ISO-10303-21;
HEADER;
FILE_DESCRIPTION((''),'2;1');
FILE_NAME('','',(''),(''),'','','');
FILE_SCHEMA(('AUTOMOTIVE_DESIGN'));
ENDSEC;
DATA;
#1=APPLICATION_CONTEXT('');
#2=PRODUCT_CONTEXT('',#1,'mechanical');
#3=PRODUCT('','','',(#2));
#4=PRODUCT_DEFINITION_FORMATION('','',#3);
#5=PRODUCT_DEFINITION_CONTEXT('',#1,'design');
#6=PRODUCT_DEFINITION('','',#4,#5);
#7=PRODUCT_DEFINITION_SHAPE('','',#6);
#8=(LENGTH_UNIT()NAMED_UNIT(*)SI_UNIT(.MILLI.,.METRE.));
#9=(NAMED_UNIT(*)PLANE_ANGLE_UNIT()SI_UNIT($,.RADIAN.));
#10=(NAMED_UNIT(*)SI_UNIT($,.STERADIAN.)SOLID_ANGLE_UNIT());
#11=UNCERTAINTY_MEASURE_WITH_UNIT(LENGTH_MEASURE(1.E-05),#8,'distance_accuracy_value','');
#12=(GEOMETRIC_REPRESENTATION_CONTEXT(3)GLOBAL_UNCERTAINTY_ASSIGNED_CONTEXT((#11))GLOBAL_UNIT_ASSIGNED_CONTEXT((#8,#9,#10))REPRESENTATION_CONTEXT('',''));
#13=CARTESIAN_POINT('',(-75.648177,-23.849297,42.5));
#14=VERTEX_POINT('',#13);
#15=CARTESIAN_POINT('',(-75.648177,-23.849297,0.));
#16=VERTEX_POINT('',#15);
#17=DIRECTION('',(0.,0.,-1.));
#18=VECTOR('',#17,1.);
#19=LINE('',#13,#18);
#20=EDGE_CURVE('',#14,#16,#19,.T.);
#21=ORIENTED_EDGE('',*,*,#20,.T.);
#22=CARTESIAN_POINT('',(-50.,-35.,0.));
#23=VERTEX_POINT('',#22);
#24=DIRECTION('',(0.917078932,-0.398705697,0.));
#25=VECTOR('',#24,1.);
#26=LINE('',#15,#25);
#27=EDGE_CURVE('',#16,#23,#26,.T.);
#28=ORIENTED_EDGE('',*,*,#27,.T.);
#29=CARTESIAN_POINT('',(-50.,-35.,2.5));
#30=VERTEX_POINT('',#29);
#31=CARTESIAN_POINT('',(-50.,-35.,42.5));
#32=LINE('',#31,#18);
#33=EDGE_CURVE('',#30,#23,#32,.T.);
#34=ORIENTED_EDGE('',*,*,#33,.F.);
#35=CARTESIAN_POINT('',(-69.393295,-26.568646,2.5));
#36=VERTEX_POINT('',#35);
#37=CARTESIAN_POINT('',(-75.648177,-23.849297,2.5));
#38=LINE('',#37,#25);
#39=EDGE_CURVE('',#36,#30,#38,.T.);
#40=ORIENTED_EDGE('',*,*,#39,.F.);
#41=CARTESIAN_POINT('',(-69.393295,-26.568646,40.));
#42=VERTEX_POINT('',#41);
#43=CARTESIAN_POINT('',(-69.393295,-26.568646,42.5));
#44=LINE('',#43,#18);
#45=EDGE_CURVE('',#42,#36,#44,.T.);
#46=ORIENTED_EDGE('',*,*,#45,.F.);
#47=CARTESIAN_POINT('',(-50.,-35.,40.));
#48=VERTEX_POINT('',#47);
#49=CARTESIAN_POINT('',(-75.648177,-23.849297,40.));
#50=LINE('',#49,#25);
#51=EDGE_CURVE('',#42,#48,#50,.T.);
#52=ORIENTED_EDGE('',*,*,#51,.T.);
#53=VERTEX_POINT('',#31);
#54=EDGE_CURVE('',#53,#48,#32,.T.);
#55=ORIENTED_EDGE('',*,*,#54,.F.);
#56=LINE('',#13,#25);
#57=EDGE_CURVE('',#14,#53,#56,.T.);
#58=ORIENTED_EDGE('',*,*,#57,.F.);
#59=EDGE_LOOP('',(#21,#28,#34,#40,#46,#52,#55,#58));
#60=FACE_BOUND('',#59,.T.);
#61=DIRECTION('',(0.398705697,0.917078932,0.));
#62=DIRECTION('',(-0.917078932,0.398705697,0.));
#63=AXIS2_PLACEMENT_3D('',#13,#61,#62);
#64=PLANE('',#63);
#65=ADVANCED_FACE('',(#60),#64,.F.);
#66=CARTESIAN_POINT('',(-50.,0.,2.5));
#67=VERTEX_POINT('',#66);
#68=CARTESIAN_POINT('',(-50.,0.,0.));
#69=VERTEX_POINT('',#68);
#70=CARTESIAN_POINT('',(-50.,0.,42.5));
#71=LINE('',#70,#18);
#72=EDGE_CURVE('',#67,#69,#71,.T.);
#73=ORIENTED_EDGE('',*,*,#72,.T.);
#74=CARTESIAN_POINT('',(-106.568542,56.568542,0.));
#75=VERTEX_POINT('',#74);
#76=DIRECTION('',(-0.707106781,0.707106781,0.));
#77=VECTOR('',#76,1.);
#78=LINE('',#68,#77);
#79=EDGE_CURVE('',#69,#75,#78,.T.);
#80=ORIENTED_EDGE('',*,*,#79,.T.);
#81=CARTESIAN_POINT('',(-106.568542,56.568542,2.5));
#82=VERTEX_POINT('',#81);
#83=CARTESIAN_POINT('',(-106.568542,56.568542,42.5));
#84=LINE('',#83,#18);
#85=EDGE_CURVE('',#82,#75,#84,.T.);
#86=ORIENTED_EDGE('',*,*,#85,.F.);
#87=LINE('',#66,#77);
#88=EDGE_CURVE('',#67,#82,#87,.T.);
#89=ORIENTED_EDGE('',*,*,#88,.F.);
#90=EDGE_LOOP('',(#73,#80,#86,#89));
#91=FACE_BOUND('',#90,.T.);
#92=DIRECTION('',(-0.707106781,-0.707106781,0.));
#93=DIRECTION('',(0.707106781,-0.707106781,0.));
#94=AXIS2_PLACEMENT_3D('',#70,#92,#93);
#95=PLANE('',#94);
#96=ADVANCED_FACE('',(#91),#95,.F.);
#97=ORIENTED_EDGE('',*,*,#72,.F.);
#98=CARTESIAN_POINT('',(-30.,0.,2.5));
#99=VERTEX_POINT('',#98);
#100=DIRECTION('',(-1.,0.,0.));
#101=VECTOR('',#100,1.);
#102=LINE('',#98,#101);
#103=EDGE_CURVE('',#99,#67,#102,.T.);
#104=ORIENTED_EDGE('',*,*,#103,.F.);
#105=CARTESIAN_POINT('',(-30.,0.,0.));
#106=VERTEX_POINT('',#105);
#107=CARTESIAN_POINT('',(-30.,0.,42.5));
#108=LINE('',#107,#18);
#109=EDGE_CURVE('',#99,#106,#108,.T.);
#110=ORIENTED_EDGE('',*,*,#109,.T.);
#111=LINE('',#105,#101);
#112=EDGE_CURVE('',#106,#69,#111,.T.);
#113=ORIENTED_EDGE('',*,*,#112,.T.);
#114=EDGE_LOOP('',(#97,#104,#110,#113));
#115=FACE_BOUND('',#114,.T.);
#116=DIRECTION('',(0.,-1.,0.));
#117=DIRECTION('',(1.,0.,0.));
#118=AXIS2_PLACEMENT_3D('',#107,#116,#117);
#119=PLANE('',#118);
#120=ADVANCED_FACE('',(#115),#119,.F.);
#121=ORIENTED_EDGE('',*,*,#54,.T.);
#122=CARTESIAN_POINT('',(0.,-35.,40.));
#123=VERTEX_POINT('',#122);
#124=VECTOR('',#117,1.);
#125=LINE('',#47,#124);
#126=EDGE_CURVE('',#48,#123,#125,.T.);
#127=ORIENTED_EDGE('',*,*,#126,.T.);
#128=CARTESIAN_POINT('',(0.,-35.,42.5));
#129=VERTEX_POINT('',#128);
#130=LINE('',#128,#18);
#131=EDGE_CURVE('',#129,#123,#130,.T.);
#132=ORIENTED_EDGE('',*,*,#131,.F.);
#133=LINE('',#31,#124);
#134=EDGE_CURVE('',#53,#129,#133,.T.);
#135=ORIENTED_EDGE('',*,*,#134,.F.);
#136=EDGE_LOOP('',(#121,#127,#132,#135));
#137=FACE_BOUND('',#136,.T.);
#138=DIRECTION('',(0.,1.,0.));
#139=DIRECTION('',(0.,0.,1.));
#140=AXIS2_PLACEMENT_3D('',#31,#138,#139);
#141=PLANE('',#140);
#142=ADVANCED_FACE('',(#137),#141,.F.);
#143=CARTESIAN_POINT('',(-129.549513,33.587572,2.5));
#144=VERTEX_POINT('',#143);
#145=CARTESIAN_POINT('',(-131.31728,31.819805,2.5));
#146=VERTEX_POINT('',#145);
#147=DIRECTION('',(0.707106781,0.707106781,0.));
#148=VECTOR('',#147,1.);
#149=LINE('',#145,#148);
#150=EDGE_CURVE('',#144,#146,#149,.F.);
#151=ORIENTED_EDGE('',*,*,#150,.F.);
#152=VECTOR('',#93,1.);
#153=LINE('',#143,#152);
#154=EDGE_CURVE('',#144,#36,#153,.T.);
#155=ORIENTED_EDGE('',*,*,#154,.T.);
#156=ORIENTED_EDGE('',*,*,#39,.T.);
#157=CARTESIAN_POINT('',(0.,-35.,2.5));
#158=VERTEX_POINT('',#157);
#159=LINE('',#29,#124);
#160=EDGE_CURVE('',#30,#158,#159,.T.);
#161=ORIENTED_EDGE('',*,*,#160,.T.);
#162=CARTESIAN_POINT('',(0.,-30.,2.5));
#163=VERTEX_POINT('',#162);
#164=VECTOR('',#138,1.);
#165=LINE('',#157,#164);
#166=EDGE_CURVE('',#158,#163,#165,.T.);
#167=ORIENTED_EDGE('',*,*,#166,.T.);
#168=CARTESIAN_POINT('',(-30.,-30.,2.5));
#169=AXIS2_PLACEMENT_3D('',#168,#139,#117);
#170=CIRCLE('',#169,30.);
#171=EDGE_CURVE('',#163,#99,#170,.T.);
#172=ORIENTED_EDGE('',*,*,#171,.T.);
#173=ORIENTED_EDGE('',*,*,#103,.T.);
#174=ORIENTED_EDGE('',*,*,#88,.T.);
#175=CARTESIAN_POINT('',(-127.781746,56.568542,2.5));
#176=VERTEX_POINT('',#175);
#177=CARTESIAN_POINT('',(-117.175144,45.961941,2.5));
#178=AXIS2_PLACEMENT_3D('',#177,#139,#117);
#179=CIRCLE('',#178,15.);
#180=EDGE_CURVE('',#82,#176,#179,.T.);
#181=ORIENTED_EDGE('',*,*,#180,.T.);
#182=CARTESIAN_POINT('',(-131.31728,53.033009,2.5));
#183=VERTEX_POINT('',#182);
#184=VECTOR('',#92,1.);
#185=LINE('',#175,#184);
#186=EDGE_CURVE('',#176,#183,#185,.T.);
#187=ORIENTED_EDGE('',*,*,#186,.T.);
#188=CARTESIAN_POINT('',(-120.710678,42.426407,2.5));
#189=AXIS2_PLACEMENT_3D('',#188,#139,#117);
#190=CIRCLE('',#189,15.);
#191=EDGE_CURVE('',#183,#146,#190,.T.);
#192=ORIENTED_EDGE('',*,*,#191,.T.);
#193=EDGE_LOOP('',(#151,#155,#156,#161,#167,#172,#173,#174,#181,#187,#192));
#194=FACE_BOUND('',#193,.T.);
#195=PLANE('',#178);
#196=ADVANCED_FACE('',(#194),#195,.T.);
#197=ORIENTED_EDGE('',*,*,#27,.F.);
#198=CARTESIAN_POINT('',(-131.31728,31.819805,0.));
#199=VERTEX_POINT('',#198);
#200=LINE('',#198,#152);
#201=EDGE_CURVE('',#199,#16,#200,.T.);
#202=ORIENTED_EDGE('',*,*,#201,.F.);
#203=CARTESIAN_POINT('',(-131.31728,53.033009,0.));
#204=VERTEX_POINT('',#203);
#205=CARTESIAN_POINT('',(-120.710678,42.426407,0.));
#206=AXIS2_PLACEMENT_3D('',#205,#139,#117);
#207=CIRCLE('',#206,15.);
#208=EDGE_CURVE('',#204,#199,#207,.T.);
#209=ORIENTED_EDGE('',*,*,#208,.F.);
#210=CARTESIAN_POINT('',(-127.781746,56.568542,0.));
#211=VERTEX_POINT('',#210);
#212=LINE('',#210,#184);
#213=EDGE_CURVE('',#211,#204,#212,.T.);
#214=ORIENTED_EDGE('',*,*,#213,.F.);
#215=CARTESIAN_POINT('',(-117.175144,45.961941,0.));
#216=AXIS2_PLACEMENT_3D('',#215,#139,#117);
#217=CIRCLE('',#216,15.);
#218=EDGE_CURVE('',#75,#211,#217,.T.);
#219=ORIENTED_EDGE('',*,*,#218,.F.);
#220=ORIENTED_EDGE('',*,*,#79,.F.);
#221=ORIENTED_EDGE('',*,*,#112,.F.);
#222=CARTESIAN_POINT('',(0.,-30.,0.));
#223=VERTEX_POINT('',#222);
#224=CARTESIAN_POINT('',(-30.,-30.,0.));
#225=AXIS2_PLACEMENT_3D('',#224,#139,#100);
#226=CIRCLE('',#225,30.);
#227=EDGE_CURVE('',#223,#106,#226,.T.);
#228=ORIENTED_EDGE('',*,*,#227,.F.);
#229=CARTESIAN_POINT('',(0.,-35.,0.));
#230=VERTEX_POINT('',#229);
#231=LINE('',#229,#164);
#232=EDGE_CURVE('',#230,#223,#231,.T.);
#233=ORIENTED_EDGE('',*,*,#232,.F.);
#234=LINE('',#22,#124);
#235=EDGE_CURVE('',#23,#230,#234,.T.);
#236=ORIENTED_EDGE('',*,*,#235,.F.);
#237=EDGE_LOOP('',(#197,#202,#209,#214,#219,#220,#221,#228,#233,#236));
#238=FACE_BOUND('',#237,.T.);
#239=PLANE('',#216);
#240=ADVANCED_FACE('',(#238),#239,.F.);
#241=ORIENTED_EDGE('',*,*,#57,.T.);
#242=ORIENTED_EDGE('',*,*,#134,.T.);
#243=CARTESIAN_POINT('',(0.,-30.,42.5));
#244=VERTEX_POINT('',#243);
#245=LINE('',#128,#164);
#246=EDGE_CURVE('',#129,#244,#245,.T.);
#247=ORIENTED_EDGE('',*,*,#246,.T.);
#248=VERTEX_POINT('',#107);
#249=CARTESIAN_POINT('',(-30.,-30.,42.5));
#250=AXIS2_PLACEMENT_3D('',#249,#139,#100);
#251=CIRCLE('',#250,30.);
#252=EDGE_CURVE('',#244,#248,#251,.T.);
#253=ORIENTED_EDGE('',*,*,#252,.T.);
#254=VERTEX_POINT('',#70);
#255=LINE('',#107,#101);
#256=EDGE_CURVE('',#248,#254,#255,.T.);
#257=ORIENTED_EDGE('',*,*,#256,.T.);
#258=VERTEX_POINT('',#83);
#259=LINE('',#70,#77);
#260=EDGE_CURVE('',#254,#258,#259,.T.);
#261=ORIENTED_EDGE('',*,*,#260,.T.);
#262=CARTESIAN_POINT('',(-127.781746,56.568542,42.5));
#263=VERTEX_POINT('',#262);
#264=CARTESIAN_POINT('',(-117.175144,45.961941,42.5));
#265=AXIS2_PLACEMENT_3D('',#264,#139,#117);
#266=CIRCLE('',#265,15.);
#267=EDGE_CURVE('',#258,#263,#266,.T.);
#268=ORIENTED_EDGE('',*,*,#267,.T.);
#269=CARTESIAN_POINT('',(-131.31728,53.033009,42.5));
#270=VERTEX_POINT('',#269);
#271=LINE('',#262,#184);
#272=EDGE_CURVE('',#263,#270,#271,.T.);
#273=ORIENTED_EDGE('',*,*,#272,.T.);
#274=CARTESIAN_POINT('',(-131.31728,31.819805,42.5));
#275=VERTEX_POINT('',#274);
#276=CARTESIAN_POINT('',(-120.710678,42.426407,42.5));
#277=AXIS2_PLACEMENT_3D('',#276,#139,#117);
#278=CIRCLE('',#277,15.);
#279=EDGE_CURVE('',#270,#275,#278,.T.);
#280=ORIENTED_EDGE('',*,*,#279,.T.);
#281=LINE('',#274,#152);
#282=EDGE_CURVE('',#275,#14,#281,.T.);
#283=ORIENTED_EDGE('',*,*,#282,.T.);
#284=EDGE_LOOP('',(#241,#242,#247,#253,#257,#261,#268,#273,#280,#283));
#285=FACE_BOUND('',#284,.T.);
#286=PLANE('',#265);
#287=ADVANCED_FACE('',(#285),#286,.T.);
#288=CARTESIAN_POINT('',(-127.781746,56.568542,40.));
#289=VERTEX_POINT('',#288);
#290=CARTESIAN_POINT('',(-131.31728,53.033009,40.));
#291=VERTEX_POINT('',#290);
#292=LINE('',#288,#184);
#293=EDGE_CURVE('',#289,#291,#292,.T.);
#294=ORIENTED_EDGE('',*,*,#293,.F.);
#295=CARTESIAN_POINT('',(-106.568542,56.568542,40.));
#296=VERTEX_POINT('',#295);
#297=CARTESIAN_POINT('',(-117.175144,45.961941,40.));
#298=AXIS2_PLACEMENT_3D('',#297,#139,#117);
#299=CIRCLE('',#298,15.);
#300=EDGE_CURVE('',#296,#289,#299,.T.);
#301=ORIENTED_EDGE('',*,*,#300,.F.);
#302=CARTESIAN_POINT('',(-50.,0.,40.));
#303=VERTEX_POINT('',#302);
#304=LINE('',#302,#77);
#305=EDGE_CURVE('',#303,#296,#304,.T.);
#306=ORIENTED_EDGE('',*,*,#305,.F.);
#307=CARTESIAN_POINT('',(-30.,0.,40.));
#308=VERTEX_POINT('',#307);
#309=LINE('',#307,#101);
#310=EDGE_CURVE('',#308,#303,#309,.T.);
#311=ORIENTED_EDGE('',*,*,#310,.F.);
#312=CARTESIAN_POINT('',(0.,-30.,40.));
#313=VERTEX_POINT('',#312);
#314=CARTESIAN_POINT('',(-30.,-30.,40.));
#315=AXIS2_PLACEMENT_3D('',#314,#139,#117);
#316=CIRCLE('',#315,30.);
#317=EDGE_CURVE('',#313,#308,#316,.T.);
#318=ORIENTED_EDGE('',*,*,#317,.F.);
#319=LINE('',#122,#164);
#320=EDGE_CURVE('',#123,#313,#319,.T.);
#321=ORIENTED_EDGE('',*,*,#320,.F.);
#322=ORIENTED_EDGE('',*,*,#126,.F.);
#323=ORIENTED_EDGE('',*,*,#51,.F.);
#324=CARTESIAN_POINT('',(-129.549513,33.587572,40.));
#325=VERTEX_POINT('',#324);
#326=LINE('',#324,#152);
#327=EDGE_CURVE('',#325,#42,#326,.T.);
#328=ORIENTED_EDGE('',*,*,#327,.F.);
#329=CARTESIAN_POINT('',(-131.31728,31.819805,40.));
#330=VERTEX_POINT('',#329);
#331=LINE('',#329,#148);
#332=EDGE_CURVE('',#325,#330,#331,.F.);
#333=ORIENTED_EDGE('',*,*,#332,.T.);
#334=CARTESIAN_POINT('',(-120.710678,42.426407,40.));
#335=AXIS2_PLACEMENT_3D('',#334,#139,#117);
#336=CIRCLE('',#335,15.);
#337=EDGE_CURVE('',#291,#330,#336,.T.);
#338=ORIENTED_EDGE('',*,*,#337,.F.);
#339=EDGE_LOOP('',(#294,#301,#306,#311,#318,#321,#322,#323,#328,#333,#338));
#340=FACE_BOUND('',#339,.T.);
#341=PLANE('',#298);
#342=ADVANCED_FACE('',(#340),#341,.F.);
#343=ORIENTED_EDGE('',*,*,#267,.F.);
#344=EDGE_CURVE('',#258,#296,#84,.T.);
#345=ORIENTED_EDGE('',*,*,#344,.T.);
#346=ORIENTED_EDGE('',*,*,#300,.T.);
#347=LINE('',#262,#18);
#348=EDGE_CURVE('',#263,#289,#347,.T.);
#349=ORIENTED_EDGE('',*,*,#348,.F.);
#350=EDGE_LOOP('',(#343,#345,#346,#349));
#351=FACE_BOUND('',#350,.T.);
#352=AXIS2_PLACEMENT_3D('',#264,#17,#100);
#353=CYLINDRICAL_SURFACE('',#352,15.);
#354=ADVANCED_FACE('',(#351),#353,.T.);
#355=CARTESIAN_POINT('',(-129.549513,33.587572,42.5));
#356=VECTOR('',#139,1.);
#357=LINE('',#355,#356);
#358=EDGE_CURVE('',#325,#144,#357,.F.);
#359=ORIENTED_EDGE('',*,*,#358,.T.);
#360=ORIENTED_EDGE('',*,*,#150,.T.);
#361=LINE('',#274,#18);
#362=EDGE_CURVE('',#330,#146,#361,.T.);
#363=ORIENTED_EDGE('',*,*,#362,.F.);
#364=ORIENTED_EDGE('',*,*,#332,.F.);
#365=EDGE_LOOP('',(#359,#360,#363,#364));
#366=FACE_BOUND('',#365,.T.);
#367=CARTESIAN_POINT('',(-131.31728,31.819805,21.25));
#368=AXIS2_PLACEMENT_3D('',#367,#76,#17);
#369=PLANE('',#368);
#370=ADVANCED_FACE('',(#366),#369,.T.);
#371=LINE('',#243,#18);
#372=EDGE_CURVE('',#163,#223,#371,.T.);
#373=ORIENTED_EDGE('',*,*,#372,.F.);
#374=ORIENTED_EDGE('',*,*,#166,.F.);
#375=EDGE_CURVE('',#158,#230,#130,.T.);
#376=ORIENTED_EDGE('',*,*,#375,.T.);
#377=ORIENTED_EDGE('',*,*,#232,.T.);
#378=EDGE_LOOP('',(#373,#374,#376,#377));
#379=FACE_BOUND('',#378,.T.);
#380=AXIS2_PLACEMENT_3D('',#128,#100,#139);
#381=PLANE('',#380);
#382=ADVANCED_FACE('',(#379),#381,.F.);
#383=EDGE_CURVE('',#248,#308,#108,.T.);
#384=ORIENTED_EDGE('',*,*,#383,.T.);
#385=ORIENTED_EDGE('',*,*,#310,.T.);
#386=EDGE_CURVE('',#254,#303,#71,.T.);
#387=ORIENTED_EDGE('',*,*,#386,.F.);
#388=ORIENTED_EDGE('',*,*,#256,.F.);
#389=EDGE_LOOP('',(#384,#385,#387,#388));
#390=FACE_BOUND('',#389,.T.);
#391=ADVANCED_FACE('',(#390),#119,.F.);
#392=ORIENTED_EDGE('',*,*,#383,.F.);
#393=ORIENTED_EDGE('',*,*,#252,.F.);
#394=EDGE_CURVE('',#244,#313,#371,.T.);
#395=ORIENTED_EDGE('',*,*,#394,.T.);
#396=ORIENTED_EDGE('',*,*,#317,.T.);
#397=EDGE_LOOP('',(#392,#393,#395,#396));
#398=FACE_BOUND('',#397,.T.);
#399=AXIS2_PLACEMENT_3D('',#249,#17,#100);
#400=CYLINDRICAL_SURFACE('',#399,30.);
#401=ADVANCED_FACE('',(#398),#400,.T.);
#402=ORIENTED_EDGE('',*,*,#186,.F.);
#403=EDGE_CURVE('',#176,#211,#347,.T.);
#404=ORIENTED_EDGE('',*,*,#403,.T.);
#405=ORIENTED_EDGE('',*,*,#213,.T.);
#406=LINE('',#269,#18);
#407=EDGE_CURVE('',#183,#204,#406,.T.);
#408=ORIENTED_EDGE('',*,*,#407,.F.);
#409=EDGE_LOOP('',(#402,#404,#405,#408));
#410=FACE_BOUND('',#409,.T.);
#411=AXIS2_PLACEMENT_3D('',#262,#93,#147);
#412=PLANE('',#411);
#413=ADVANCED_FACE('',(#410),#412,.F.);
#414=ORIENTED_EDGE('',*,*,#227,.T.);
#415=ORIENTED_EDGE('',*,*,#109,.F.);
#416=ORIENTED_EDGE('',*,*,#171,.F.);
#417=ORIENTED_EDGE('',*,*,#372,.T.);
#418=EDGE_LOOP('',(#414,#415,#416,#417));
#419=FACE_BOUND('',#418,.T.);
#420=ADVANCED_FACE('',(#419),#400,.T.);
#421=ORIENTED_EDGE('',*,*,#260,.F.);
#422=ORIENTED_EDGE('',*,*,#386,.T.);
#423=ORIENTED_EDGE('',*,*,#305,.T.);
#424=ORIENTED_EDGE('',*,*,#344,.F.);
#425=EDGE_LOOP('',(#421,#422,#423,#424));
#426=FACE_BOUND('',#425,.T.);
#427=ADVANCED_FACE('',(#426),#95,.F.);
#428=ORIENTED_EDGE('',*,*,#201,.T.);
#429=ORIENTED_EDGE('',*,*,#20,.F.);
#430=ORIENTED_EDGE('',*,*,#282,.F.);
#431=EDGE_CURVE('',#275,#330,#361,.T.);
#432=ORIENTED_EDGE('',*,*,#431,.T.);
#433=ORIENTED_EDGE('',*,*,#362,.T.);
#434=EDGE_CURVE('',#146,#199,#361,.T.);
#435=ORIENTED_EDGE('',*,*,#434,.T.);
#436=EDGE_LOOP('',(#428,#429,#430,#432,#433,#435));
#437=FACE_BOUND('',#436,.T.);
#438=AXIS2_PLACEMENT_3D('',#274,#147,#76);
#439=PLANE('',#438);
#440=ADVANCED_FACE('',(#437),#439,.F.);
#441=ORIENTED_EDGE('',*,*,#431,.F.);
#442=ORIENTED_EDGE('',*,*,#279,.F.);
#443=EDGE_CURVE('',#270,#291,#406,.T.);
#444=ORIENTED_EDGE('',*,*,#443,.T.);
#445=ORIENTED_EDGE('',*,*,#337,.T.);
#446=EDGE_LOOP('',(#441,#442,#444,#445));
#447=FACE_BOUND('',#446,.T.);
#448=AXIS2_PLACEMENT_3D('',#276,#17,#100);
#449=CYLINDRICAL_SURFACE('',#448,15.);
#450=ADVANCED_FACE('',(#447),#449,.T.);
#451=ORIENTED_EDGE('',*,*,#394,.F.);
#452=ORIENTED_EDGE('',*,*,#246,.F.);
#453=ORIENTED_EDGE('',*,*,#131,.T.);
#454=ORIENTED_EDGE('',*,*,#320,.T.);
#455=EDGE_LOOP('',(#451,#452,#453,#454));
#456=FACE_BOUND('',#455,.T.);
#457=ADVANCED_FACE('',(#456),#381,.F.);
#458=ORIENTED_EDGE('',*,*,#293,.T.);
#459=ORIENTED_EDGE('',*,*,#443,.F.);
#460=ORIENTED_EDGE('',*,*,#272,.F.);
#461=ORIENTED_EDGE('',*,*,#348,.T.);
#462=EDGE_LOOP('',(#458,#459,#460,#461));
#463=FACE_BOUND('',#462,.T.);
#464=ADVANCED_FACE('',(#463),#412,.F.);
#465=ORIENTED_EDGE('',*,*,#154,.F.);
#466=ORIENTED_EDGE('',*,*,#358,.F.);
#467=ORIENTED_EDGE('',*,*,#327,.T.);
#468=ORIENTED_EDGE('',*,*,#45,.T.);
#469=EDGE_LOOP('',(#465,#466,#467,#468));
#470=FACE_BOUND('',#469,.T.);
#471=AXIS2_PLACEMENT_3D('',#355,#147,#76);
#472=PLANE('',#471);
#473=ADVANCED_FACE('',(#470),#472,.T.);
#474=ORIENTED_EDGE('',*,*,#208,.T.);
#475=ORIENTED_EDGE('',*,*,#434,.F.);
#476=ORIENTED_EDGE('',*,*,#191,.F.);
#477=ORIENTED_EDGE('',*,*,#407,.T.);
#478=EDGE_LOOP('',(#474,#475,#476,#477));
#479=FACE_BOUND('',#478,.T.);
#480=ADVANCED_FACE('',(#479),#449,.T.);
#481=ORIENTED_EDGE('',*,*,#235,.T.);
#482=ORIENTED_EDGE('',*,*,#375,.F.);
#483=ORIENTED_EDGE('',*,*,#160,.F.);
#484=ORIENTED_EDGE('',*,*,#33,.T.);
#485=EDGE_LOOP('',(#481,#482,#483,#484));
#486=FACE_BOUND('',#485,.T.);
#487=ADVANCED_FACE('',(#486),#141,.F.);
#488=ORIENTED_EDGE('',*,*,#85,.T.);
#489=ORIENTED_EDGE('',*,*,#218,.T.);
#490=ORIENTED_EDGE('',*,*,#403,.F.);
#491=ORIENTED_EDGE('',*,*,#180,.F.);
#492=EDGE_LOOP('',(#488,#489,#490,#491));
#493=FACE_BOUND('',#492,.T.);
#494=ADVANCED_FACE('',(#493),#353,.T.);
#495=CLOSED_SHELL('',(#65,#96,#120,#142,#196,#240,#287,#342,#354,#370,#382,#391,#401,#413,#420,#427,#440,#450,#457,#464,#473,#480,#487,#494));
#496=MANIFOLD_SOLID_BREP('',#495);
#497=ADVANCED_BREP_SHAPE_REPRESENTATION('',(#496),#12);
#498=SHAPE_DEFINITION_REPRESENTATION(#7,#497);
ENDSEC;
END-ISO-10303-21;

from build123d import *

# Parameters (mm, degrees)
BOSS_EXTRUDE1_DEPTH = 42.5
SHELL3_START        = -130.355339059
SHELL3_OUTLINE_W    = 56.855339059
SHELL3_OUTLINE_H    = 37.5
SHELL3_DEPTH        = 155.104076401
SHELL3_2_OUTLINE_W  = 4.144660941
SHELL3_2_OUTLINE_H  = 37.5
SHELL3_2_DEPTH      = 15


# Read off the part's stored shape, not the designer's step: Shell3
with BuildPart() as part:
    # Sketch1 → Boss-Extrude1 (new body)
    with BuildSketch(Plane.XY):
        with BuildLine():
            Line((-30, 0), (-50, 0))
            Line((-50, 0), (-106.568542495, 56.568542495))
            ThreePointArc((-106.568542495, 56.568542495), (-117.175144213, 60.961940777), (-127.781745931, 56.568542495))
            Line((-127.781745931, 56.568542495), (-131.317279836, 53.033008589))
            ThreePointArc((-131.317279836, 53.033008589), (-135.710678119, 42.426406871), (-131.317279836, 31.819805153))
            Line((-131.317279836, 31.819805153), (-75.648177206, -23.849297477))
            Line((-75.648177206, -23.849297477), (-50, -35))
            Line((-50, -35), (0, -35))
            Line((0, -35), (0, -30))
            ThreePointArc((0, -30), (-8.786796564, -8.786796564), (-30, 0))
        make_face()
    extrude(amount=BOSS_EXTRUDE1_DEPTH)

    # Shell3 outline → Shell3 (cut)
    with BuildSketch(Plane(origin=(0, 0, 0), x_dir=(0.7071067811865431, 0.707106781186552, 0), z_dir=(0.707106781186552, -0.707106781186543, 0)).offset(SHELL3_START)):
        with Locations((-39.42766953, 21.25)):
            Rectangle(SHELL3_OUTLINE_W, SHELL3_OUTLINE_H)
    extrude(amount=SHELL3_DEPTH, mode=Mode.SUBTRACT)

    # Shell3 2 outline → Shell3 2 (cut)
    with BuildSketch(Plane(origin=(0, 0, 0), x_dir=(0.7071067811865431, 0.707106781186552, 0), z_dir=(0.707106781186552, -0.707106781186543, 0)).offset(SHELL3_START)):
        with Locations((-69.92766953, 21.25)):
            Rectangle(SHELL3_2_OUTLINE_W, SHELL3_2_OUTLINE_H)
    extrude(amount=SHELL3_2_DEPTH, mode=Mode.SUBTRACT)


solid = part.part
